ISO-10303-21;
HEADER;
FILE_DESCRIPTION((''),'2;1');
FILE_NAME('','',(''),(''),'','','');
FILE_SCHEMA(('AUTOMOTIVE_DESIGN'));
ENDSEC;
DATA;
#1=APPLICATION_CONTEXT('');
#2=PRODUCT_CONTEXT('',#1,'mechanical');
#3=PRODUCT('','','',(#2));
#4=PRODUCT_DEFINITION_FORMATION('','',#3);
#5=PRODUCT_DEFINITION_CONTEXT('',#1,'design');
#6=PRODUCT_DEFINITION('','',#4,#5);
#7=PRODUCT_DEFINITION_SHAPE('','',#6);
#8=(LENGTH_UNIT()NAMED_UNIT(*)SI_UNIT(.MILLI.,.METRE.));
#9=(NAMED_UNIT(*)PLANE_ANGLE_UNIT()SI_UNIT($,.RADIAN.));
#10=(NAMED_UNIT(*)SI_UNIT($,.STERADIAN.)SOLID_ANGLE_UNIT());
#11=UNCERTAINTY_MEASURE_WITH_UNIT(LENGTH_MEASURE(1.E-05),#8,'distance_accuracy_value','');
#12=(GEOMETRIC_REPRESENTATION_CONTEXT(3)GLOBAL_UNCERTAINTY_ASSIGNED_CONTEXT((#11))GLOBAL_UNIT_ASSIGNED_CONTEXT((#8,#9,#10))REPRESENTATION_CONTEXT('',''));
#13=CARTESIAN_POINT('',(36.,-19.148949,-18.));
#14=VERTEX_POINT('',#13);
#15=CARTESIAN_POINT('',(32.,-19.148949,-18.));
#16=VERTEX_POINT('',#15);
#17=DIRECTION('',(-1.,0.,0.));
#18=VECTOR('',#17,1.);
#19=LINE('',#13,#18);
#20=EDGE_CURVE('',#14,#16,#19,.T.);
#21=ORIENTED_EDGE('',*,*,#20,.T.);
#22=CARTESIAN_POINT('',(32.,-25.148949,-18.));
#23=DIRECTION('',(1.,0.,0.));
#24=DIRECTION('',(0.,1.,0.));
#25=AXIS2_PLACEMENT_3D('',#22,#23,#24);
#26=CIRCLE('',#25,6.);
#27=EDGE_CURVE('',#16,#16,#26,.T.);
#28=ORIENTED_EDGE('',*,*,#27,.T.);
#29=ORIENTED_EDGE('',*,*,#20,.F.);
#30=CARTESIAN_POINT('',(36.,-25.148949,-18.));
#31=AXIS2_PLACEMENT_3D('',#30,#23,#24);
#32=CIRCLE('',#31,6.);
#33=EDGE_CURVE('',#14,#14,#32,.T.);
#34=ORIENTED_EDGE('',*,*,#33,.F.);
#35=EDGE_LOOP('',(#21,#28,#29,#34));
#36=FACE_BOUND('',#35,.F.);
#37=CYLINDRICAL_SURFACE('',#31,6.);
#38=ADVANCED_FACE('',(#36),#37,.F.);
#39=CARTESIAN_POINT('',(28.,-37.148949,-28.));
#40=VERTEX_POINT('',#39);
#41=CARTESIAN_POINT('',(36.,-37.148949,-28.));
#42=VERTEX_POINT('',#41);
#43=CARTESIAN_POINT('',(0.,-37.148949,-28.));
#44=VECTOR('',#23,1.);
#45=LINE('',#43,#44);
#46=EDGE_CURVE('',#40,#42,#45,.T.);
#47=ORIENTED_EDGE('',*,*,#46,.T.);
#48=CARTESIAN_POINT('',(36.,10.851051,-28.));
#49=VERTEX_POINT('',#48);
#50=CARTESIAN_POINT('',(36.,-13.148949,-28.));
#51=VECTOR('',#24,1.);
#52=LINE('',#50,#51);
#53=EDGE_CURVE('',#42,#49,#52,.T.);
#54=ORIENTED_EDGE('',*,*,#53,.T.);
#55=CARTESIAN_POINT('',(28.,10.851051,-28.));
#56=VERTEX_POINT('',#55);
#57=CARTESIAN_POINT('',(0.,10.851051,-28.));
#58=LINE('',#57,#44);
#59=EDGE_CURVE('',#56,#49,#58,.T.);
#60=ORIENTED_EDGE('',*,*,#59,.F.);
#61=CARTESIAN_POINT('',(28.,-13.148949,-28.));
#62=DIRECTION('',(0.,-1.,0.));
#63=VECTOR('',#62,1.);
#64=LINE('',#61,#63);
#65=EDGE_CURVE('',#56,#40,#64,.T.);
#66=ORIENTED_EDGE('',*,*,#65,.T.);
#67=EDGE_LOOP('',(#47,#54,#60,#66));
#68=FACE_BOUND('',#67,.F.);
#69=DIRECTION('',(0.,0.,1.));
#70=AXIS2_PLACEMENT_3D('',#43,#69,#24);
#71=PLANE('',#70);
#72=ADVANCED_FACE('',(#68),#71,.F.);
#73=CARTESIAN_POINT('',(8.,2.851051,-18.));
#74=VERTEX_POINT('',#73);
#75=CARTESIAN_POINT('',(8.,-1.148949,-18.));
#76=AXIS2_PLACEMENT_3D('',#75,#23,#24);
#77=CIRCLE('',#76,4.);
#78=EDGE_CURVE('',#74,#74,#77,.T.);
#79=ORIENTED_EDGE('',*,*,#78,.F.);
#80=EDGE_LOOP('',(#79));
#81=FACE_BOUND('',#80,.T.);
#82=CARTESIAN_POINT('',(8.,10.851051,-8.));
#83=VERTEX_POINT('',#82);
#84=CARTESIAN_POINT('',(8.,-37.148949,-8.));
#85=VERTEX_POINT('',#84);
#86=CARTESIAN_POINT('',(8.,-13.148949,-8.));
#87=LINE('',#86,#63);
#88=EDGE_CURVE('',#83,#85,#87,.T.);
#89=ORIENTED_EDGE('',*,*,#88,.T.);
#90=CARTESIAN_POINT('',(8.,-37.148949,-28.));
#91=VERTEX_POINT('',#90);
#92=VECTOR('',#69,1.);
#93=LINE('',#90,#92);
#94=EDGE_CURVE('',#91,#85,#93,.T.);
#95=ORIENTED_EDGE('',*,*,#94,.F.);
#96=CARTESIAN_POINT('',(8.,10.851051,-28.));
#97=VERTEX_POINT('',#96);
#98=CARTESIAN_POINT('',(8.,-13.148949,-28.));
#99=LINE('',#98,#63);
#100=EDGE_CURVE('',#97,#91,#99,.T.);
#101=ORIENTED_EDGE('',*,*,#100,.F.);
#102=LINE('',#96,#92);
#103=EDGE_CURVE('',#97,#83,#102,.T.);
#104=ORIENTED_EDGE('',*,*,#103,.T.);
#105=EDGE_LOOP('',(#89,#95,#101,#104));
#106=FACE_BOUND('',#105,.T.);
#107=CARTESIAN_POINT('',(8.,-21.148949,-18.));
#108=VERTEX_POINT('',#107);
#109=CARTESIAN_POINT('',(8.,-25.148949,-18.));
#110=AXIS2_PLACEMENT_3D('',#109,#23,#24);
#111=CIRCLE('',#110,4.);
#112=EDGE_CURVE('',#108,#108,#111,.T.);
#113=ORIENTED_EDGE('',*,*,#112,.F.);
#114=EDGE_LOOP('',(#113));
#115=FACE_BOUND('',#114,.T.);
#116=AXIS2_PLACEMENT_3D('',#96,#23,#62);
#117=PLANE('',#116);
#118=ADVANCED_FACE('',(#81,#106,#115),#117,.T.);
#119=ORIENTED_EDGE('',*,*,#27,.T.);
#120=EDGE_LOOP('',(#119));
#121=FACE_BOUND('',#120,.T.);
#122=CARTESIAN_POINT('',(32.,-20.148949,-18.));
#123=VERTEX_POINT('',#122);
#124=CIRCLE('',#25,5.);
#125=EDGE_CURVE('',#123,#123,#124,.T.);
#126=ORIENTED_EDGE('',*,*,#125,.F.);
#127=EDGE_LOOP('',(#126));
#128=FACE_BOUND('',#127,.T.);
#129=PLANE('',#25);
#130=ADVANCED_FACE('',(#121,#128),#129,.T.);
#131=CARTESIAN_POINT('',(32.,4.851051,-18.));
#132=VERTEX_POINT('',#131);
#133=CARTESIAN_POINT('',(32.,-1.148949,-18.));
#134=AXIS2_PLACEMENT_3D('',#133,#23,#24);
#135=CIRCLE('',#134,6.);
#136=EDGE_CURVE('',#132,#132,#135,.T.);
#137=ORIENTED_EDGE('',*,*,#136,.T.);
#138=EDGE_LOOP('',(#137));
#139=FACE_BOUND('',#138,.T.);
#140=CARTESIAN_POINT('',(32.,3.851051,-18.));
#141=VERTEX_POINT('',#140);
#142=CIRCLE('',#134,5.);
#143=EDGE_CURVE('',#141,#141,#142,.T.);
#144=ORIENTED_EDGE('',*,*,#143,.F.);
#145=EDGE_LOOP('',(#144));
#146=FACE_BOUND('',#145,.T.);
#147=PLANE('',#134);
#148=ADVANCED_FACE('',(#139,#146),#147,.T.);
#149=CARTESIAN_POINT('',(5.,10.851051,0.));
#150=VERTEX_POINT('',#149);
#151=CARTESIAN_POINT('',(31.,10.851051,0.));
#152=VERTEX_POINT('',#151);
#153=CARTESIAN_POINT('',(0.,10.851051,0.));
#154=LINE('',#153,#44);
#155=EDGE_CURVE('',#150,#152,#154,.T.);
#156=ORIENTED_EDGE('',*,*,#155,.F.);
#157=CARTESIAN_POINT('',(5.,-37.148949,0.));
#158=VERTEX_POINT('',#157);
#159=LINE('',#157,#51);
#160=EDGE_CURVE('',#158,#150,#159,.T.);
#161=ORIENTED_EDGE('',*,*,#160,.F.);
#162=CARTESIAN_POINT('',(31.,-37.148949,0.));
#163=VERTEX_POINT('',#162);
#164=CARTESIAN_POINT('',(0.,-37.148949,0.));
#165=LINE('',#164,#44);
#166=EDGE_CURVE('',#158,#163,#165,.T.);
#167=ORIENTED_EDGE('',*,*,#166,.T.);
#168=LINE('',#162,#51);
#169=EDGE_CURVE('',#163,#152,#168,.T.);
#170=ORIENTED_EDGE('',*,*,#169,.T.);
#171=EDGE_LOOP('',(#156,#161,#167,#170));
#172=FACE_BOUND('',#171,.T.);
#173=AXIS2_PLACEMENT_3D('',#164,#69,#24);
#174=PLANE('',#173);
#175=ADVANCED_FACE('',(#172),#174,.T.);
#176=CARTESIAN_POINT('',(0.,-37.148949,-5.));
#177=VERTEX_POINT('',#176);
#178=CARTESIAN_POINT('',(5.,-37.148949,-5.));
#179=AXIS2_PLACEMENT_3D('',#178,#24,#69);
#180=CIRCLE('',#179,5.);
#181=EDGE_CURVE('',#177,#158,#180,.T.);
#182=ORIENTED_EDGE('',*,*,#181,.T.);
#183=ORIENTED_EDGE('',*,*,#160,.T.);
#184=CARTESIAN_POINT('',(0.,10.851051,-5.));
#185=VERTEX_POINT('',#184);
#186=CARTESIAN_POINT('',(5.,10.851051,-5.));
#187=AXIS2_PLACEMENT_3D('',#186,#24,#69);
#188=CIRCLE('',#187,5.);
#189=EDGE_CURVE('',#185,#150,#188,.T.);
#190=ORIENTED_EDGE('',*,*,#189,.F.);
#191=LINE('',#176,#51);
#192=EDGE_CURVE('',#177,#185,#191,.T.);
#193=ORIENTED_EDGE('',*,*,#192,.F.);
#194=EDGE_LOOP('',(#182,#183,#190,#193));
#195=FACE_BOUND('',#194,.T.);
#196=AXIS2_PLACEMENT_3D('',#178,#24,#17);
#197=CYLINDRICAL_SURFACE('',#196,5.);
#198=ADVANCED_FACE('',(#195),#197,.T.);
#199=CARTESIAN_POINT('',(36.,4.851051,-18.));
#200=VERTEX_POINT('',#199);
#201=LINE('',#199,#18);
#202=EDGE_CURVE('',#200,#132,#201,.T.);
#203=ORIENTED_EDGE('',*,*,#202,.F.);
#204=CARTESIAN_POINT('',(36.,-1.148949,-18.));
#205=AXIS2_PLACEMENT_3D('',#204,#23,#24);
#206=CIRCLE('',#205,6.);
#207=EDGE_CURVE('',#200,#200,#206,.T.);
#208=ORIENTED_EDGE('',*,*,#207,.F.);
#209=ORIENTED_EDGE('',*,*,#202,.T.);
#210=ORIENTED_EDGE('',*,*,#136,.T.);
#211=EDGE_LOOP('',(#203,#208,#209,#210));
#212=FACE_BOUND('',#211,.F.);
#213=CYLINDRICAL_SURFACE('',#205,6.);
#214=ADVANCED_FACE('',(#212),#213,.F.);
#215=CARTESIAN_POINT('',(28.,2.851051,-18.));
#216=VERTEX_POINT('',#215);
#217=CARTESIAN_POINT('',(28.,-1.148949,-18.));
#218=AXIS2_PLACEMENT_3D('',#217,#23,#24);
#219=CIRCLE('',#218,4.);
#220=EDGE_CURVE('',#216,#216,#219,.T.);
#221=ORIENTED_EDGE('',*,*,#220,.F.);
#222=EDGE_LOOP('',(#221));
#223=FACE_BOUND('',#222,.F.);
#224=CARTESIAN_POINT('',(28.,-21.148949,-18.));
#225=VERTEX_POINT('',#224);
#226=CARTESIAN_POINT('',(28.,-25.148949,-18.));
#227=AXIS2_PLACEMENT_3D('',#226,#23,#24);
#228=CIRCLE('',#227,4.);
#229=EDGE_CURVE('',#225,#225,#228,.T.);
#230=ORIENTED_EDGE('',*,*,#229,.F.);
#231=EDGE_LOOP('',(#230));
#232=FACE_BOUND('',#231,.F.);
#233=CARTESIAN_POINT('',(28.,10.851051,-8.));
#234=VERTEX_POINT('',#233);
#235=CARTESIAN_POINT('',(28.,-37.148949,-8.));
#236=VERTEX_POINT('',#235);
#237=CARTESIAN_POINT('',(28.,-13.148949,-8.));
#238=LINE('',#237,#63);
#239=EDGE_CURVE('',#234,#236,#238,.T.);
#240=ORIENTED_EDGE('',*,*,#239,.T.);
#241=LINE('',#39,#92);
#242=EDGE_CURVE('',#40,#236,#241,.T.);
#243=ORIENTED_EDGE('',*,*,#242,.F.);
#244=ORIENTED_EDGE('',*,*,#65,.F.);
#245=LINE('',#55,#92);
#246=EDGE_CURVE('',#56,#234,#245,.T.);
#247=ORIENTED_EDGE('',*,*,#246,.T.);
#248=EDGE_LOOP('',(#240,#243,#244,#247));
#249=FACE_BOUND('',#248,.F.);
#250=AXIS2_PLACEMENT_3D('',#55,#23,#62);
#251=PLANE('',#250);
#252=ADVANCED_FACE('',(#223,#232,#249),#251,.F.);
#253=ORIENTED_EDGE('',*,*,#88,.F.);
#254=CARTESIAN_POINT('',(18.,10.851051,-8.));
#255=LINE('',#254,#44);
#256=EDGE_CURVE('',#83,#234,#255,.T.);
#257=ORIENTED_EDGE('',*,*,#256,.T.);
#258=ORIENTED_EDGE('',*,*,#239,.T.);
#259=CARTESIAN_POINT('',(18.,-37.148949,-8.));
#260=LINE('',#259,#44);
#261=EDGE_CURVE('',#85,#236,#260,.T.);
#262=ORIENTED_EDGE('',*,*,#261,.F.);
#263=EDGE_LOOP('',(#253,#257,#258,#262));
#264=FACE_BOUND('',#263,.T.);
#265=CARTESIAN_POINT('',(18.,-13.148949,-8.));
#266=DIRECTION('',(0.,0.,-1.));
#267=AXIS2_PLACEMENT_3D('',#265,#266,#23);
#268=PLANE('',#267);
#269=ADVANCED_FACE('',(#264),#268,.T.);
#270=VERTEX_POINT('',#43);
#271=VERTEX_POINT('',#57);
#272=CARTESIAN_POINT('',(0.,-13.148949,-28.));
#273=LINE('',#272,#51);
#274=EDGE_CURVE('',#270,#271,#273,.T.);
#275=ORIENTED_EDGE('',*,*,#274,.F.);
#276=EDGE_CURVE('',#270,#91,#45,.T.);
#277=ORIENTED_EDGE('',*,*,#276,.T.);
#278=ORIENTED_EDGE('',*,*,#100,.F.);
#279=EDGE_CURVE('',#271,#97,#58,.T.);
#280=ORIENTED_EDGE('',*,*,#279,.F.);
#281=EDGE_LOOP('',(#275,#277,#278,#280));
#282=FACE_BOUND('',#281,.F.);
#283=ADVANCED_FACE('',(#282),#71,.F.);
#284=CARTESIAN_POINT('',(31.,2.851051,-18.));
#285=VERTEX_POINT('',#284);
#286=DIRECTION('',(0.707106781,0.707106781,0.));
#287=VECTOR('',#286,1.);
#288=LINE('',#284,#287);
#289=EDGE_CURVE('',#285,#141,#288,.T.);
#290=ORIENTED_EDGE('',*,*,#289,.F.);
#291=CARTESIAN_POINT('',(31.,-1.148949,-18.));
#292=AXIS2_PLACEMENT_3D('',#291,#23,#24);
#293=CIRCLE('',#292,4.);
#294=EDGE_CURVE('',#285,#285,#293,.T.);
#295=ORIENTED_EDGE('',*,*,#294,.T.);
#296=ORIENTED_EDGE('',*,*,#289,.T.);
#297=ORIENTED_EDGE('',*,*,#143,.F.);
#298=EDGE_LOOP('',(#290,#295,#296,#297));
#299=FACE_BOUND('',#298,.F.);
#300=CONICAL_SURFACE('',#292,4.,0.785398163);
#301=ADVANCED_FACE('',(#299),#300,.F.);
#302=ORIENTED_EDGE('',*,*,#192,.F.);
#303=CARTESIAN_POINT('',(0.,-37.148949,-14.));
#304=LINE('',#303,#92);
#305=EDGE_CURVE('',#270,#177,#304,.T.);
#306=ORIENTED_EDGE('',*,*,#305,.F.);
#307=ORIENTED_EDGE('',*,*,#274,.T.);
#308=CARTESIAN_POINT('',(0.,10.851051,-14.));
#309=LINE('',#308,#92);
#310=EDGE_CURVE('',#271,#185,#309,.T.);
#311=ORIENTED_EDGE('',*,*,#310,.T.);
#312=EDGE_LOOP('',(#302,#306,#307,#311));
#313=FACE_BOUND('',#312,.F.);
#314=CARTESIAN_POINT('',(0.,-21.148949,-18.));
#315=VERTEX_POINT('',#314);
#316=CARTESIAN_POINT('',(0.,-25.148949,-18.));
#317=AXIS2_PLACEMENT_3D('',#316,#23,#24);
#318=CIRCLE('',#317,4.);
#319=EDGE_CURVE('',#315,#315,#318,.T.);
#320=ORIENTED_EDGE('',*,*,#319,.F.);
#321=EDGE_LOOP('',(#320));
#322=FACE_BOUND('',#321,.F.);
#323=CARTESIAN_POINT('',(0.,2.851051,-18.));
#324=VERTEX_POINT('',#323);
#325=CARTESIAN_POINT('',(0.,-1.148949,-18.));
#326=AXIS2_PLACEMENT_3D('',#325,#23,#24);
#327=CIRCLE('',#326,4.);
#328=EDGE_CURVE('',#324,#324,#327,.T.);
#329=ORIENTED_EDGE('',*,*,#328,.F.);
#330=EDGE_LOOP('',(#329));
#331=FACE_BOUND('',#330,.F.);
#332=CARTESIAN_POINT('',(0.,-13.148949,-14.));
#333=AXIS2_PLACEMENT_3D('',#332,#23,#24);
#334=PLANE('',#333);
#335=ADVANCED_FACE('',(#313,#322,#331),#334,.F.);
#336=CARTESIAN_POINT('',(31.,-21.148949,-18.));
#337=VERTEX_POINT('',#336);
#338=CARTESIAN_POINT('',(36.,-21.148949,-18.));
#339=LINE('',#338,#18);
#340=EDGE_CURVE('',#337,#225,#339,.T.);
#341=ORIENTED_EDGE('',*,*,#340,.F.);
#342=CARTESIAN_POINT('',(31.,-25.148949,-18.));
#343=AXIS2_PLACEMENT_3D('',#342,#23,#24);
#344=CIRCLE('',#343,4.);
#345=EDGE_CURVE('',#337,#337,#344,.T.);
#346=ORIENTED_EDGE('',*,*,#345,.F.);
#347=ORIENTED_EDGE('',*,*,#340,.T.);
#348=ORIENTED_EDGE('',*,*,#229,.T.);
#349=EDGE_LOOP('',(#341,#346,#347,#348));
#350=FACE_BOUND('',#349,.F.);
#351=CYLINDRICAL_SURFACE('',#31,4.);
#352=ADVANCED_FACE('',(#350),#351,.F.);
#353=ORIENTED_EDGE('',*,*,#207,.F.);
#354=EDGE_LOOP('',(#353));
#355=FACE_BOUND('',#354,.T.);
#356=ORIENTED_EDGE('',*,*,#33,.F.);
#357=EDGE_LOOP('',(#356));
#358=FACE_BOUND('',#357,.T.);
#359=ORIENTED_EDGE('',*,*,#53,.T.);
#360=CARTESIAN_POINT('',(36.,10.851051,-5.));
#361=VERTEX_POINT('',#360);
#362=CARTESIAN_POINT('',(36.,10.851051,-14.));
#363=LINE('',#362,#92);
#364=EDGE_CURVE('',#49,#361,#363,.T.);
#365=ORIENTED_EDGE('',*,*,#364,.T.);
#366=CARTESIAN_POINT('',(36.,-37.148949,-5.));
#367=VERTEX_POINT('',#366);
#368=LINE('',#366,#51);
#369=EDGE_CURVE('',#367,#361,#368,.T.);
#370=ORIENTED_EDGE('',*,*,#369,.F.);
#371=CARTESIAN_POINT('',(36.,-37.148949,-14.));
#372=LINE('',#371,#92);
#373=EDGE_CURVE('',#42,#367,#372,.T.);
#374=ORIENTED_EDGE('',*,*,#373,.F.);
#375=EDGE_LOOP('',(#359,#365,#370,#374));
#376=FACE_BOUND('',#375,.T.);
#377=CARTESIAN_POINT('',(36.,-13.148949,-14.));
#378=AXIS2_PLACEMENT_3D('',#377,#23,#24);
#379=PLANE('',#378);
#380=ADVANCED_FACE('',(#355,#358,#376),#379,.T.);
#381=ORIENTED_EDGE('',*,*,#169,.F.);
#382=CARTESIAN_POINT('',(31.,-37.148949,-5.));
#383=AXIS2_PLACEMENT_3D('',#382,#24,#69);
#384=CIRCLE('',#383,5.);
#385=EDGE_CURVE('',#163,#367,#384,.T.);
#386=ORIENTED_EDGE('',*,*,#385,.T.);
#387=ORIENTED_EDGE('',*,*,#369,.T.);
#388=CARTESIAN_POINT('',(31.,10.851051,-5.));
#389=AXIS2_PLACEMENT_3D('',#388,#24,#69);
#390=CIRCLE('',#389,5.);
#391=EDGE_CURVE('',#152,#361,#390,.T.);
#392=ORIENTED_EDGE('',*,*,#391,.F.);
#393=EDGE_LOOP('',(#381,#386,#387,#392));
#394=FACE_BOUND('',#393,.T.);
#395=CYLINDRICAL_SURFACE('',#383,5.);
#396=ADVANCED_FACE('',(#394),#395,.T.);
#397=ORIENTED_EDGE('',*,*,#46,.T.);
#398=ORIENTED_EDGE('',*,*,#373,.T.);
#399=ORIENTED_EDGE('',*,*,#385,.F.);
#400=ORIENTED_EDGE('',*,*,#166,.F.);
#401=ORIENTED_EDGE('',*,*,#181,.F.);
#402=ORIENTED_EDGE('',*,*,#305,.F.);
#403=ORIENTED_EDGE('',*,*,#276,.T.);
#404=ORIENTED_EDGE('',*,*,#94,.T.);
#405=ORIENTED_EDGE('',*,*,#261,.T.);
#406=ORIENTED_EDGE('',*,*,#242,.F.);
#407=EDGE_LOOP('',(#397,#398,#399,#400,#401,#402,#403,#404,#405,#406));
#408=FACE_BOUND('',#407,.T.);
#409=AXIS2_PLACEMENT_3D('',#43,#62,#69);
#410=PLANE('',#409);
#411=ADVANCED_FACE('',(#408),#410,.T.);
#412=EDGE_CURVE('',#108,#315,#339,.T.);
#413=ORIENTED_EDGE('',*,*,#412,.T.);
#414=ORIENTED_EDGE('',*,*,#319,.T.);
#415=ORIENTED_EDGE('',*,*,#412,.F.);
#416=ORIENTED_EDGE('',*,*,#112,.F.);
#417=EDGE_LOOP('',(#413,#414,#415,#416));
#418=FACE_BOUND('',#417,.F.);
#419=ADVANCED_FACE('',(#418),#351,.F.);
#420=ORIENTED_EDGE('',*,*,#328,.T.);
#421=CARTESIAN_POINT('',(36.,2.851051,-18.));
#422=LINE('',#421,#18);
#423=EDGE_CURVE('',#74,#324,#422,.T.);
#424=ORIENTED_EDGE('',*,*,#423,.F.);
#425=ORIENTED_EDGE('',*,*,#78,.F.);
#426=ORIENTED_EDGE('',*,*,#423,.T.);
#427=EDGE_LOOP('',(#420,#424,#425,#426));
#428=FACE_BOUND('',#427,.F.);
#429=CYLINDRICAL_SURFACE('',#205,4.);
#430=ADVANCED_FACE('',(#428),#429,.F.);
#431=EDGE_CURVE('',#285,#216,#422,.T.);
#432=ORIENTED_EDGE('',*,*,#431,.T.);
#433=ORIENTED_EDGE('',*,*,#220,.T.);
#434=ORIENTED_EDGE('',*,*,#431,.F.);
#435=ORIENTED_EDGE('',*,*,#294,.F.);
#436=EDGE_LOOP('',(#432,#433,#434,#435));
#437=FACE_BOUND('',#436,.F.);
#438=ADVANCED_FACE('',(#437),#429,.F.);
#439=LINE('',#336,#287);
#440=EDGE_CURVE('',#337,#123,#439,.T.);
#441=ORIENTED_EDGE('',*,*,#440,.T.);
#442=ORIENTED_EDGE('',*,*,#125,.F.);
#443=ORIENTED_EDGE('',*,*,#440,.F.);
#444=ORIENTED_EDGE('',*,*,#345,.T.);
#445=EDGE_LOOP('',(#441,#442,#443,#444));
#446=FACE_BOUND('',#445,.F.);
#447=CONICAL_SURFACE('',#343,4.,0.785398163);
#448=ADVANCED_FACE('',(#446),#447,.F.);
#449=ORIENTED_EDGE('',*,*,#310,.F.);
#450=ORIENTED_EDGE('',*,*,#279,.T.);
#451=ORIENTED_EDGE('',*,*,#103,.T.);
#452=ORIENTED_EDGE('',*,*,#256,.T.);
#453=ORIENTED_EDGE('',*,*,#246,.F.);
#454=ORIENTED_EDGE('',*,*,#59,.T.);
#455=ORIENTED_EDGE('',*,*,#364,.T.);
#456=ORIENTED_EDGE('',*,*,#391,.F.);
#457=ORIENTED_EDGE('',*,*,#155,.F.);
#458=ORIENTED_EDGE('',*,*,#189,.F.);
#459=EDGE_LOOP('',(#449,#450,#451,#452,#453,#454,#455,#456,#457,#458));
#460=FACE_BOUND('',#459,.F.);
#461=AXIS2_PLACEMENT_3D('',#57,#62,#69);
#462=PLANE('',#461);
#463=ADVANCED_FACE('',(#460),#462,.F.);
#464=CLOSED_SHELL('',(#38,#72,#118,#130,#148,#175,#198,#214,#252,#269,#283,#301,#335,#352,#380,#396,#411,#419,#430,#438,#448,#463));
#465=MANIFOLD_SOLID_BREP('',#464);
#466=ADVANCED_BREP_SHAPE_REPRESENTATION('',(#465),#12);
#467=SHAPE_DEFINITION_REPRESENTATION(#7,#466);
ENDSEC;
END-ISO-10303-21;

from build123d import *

# Parameters (mm, degrees)
F0_W     = 48
F0_H     = 28
F1_DEPTH = 36
F2_W     = 20
F2_H     = 48
F3_DEPTH = 20
F4_R     = 5
F5_R     = 4
F6_DEPTH = 36
F7_R     = 6
F8_DEPTH = 4
F9_SIZE  = 1


with BuildPart() as f1:
    # F0 (on Right) → F1 (new body)
    with BuildSketch(Plane.YZ):
        with Locations((-13.1489487588, -14)):
            Rectangle(F0_W, F0_H)
    extrude(amount=F1_DEPTH)

    # F2 (on face) → F3 (cut)
    with BuildSketch(Plane(origin=(0, 0, -28), x_dir=(1, 0, 0), z_dir=(0, 0, -1))):
        with Locations((18, 13.1489487588)):
            Rectangle(F2_W, F2_H)
    extrude(amount=-F3_DEPTH, mode=Mode.SUBTRACT)

    # F4
    f4_edges = [f1.edges().sort_by_distance(p)[0] for p in [
        (0, -13.148949, 0),
        (36, -13.148949, 0),
    ]]
    fillet(f4_edges, radius=F4_R)

    # F5 (on face) → F6 (cut)
    with BuildSketch(Plane.YZ.offset(36)):
        with Locations((46.8510512412, -18)):
            Circle(F5_R)
        with Locations((22.8510512412, -18)):
            Circle(F5_R)
        with Locations((-1.1489487588, -18)):
            Circle(F5_R)
        with Locations((-25.1489487588, -18)):
            Circle(F5_R)
    extrude(amount=-F6_DEPTH, mode=Mode.SUBTRACT)

    # F7 (on face) → F8 (cut)
    with BuildSketch(Plane.YZ.offset(36)):
        with Locations((-25.1489487588, -18)):
            Circle(F7_R)
        with Locations((-1.1489487588, -18)):
            Circle(F7_R)
        with Locations((22.8510512412, -18)):
            Circle(F7_R)
        with Locations((46.8510512412, -18)):
            Circle(F7_R)
    extrude(amount=-F8_DEPTH, mode=Mode.SUBTRACT)

    # F9
    f9_edges = [f1.edges().sort_by_distance(p)[0] for p in [
        (32, -29.148949, -18),
        (32, -5.148949, -18),
    ]]
    chamfer(f9_edges, length=F9_SIZE)


solid = f1.part
